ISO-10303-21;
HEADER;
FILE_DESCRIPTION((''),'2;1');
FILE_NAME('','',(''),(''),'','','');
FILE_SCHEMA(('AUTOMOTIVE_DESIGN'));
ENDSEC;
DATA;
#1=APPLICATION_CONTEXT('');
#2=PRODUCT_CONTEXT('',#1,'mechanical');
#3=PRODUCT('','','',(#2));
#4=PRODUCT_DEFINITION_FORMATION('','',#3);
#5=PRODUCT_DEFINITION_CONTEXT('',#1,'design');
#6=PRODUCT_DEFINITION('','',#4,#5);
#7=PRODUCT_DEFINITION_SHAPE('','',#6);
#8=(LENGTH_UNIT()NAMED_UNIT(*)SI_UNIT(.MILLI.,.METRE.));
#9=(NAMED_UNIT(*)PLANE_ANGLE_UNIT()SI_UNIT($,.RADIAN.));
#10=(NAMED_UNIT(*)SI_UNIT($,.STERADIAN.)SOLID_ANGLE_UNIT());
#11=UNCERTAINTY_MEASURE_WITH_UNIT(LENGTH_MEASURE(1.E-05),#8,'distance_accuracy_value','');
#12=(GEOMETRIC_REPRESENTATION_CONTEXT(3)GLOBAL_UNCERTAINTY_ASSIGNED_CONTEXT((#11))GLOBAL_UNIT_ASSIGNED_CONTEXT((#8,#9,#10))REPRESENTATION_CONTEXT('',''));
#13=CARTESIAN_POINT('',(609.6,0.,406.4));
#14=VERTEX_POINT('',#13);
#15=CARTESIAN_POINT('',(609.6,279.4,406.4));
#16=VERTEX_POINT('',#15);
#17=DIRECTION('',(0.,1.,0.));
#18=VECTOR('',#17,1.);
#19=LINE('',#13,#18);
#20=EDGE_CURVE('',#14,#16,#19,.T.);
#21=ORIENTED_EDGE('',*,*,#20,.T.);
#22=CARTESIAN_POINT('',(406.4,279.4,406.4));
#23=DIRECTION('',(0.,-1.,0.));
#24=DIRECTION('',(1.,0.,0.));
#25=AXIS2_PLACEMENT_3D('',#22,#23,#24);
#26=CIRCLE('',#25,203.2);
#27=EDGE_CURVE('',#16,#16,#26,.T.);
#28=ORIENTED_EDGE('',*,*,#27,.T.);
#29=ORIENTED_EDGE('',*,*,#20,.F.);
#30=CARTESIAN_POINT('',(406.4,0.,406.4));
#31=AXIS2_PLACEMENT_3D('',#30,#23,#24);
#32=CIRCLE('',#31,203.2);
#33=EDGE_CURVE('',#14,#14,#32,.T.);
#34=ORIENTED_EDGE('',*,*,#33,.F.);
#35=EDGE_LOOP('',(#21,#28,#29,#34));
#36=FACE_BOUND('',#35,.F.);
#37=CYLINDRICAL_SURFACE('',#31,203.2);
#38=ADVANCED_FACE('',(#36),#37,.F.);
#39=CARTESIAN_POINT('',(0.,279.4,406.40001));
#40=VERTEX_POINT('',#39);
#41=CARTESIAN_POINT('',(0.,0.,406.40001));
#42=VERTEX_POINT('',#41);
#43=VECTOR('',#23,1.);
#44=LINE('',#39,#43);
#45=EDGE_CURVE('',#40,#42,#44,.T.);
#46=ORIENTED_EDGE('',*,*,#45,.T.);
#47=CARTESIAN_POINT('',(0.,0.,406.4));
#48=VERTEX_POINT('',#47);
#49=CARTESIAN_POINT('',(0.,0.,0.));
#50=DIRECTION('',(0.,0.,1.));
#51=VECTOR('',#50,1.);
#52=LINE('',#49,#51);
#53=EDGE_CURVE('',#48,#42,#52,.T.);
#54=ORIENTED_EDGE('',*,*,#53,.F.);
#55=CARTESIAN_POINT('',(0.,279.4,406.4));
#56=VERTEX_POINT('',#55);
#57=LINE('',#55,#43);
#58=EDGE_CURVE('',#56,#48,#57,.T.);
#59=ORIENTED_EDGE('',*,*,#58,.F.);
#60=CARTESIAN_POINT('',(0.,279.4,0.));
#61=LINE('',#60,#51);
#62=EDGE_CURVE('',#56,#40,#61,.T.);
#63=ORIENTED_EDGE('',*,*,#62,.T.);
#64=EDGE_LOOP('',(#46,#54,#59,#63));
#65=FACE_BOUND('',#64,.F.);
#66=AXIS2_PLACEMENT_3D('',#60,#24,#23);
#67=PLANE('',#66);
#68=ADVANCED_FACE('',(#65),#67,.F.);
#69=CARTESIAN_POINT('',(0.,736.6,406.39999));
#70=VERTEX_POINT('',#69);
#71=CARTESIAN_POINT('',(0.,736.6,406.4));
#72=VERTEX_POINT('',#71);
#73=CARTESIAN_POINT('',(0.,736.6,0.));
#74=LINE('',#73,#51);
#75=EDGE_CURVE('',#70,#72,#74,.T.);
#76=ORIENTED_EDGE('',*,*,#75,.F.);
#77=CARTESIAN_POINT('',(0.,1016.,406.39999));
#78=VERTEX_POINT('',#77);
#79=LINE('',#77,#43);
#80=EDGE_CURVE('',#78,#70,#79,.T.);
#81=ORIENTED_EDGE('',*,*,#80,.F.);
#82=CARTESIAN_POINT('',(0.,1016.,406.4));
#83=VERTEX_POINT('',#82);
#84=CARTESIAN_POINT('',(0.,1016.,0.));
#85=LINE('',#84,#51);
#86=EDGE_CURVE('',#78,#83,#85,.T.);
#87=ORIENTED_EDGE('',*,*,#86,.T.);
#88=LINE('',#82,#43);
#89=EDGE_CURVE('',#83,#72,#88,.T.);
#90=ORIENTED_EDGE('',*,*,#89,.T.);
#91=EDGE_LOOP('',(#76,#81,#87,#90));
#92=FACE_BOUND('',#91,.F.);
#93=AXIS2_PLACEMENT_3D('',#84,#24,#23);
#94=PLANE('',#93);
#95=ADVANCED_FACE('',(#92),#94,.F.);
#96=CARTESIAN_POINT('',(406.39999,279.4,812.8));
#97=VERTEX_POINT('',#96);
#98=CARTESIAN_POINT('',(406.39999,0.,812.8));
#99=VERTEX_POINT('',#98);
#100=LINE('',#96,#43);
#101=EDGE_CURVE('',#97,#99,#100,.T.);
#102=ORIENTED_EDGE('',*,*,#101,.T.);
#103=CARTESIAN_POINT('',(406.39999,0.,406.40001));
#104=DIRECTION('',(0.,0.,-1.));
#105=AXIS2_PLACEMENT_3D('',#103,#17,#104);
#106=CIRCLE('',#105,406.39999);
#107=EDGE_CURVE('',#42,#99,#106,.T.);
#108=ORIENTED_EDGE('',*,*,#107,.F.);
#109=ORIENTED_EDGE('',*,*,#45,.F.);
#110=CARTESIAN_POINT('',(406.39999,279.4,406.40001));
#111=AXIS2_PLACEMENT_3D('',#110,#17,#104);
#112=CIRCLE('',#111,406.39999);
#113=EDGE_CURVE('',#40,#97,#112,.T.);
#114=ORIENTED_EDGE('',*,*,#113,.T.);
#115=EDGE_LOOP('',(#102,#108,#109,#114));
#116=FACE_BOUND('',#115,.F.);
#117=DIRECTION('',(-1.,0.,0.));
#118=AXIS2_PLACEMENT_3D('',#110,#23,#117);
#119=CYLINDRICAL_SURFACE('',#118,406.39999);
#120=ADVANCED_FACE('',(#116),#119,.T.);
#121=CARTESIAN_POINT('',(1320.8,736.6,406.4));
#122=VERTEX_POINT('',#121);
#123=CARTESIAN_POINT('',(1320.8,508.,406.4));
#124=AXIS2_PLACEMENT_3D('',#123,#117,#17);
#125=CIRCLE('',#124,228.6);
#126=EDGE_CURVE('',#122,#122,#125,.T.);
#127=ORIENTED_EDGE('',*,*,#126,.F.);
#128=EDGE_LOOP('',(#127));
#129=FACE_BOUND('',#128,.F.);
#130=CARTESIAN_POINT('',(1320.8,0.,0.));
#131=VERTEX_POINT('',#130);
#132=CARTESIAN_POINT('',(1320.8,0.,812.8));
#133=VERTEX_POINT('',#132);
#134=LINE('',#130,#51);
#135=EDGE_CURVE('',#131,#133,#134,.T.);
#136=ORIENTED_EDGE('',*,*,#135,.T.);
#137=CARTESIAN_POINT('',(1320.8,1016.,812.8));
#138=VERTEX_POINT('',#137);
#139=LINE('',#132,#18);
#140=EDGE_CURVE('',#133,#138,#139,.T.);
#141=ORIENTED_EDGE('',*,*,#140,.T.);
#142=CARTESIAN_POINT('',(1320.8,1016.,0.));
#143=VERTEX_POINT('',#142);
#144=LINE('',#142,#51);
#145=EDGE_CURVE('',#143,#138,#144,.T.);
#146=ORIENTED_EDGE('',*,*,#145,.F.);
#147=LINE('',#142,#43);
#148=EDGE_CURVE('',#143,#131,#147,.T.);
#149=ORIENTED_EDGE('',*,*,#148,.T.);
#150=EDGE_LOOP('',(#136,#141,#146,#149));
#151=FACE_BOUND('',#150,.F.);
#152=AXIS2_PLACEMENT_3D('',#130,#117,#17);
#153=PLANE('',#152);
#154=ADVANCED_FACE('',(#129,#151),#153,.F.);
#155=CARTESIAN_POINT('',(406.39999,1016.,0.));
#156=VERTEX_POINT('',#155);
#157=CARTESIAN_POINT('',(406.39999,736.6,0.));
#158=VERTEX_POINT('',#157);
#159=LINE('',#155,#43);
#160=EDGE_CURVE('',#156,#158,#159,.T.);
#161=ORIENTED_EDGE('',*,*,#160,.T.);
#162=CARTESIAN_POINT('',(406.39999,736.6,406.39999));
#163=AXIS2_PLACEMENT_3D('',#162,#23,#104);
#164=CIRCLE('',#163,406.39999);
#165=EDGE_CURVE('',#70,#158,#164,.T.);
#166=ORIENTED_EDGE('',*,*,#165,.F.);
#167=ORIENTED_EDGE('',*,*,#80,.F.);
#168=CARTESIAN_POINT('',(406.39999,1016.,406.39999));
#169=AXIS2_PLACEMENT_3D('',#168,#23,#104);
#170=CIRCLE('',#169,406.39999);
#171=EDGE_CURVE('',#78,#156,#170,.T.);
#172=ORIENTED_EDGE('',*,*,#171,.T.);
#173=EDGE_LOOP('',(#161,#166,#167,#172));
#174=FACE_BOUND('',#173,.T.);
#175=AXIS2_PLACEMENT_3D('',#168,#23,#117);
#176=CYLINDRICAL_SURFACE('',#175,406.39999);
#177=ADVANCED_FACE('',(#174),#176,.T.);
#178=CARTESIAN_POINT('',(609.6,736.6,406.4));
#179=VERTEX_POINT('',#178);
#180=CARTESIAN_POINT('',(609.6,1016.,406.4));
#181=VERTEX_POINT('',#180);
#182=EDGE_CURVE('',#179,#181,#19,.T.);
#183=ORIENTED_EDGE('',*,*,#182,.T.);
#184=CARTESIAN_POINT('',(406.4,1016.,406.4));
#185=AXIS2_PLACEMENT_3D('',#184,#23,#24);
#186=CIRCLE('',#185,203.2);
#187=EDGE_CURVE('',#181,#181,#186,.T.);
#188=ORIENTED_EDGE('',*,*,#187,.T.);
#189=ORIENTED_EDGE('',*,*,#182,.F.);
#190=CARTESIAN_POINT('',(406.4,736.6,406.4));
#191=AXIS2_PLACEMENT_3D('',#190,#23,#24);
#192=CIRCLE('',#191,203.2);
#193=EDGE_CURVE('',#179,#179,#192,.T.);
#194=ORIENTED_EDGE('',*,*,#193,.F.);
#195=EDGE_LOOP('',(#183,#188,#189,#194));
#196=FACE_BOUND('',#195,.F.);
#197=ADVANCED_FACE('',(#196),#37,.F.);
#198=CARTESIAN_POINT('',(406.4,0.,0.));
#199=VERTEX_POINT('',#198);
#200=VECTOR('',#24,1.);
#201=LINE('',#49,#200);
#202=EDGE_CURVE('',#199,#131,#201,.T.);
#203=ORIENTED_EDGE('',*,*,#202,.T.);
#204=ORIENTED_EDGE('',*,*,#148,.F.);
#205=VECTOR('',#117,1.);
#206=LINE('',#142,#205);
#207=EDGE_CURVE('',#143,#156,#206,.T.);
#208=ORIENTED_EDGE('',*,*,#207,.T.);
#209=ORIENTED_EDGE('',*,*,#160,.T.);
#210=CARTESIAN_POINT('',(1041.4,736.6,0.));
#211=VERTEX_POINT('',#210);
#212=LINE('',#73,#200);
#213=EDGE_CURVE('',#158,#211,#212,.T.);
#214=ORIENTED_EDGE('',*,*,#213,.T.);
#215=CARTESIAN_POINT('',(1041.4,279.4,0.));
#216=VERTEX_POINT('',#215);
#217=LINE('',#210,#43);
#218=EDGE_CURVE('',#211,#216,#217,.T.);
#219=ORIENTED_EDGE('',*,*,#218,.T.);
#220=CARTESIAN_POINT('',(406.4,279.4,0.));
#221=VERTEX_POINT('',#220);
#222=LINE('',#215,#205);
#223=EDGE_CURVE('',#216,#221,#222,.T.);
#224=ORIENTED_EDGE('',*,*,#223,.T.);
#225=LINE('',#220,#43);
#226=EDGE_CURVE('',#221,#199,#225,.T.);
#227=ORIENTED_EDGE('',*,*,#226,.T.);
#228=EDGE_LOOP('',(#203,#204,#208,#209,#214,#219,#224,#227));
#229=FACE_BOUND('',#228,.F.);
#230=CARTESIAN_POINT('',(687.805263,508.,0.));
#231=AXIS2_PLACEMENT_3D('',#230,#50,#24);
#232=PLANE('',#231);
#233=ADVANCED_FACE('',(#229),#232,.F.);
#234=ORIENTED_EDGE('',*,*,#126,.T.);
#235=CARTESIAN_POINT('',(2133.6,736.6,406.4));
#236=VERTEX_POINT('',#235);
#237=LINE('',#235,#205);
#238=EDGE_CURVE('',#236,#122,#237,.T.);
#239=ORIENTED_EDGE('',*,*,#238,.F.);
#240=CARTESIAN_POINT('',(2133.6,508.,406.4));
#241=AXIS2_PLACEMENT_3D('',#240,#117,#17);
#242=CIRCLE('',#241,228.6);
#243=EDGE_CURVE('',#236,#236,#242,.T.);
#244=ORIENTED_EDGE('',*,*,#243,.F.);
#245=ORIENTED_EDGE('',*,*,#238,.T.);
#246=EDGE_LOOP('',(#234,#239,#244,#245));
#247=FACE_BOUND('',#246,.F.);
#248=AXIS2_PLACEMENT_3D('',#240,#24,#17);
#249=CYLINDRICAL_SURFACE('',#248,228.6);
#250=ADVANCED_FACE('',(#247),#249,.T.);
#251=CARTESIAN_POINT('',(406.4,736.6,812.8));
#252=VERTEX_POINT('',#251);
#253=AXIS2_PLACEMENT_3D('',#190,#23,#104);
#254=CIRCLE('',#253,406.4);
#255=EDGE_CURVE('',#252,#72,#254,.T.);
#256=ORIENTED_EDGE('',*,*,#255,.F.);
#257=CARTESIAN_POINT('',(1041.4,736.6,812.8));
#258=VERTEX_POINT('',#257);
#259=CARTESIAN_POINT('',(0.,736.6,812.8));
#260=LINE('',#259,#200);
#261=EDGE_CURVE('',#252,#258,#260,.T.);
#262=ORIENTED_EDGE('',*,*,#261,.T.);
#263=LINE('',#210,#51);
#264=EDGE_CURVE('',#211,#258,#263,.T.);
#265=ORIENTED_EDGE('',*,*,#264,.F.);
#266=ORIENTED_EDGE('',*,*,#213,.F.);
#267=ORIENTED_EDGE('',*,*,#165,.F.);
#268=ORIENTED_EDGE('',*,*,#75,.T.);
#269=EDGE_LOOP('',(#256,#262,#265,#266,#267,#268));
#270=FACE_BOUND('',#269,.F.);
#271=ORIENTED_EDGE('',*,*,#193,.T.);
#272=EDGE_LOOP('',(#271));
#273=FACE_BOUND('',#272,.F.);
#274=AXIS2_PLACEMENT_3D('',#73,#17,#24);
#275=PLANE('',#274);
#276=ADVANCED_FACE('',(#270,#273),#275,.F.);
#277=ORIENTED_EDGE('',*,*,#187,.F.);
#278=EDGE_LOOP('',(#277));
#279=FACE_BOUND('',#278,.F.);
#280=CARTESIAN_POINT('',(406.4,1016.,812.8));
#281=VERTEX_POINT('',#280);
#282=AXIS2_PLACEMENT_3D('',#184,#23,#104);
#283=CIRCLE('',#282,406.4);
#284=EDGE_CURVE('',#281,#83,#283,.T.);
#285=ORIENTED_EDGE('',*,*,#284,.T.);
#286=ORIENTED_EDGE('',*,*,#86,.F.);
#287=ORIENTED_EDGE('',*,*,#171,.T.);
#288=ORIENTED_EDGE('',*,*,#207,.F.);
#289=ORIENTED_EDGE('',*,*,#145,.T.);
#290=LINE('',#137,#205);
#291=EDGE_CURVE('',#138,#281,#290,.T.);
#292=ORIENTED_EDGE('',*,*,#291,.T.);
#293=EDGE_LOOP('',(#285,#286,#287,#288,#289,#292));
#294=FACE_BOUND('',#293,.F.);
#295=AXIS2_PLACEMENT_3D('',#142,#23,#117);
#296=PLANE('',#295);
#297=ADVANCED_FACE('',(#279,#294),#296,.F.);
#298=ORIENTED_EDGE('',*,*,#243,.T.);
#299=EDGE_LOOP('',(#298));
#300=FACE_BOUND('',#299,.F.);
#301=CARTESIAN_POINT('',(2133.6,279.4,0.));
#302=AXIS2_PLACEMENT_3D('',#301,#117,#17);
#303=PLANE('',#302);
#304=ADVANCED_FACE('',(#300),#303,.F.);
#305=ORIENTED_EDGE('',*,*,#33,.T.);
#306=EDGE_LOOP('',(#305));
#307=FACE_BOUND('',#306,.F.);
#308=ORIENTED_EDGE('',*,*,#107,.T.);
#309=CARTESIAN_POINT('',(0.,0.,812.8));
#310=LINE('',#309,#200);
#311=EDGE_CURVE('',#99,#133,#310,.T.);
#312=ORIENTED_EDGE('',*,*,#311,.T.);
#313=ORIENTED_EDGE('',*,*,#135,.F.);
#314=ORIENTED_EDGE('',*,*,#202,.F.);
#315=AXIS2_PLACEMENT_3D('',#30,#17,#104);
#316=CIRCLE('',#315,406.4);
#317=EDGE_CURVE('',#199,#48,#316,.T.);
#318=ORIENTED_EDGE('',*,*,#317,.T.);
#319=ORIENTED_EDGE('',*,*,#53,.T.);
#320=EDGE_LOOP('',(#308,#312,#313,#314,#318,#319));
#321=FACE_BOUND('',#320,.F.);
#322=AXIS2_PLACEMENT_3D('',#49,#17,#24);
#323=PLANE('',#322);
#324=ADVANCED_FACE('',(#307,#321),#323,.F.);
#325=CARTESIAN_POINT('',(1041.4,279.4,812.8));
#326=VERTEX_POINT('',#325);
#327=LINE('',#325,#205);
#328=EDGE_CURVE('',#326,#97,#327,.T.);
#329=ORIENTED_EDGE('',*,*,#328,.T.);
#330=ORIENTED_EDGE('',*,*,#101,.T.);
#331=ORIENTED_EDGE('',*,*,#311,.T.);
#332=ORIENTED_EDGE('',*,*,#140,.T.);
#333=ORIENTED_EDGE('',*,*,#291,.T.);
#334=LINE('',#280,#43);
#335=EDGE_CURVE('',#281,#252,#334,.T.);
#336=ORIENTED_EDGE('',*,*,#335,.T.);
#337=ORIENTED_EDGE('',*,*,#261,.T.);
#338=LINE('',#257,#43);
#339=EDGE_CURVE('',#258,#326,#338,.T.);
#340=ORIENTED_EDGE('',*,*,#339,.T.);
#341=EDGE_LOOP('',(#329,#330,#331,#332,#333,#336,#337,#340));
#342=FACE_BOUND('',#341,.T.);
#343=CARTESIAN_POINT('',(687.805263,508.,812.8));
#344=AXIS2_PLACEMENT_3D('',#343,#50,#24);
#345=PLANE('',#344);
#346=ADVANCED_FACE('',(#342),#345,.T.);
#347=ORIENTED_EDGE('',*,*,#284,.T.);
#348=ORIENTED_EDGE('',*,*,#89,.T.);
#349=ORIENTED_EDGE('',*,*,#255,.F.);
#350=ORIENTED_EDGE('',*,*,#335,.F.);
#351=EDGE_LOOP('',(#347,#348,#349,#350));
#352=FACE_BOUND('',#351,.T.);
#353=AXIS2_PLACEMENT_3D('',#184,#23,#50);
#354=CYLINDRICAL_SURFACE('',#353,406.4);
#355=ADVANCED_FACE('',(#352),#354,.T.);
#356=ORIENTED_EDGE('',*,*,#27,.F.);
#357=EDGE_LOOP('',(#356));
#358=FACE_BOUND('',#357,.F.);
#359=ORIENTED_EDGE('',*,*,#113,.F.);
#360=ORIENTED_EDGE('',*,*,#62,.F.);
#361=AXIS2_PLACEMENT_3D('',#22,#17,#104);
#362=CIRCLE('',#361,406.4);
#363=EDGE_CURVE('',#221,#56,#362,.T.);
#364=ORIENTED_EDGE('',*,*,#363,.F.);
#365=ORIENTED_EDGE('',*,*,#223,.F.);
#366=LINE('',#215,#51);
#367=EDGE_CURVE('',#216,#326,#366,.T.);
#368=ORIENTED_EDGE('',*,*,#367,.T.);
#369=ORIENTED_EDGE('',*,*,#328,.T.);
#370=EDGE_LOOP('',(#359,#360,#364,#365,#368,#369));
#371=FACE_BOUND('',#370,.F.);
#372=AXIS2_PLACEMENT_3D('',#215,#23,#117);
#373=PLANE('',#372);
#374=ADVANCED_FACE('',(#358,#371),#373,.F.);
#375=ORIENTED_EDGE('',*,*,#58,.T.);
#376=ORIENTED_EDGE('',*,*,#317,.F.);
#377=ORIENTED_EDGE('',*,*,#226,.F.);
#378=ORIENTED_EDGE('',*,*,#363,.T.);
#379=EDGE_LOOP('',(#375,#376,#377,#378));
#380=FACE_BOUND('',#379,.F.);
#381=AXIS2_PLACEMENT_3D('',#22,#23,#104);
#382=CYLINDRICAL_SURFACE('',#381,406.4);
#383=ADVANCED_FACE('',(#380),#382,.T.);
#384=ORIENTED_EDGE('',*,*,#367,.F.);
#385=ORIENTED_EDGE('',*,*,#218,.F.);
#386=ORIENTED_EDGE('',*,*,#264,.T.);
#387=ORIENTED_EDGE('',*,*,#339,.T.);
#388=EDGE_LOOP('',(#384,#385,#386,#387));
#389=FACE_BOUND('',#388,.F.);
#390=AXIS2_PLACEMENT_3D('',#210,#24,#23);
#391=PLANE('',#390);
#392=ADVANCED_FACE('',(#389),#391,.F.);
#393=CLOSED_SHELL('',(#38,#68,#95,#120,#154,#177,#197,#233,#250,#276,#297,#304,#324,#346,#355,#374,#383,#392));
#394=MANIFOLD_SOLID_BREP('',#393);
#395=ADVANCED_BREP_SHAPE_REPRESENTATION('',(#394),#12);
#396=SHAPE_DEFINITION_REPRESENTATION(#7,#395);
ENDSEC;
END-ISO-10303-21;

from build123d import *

# Parameters (mm, degrees)
F0_W     = 812.8
F0_H     = 457.2
F1_DEPTH = 812.8
F3_DEPTH = 812.8
F4_R     = 203.2
F5_DEPTH = 1016.001
F6_R     = 406.4
F7_R     = 406.39999
F8_R     = 406.4
F9_R     = 406.39999


# Not quite as in the source:
# - a fillet or chamfer is up to 0.001 mm smaller than in the source, because OpenCascade refuses the exact size


with BuildPart() as f1:
    # F0 (on Top) → F1 (new body)
    with BuildSketch(Plane.XY):
        Polygon((0, 279.4), (0, 0), (1320.8, 0), (1320.8, 279.4), (1320.8, 736.6), (1320.8, 1016), (0, 1016), (0, 736.6), (1041.4, 736.6), (1041.4, 279.4), align=None)
        with Locations((1727.2, 508)):
            Rectangle(F0_W, F0_H)
    extrude(amount=F1_DEPTH)

    # F2 (on face) → F3 (cut)
    with BuildSketch(Plane.YZ.offset(2133.6)):
        with BuildLine():
            ThreePointArc((279.4, 406.4), (508, 635), (736.6, 406.4))
            Line((736.6, 406.4), (736.6, 812.8))
            Line((736.6, 812.8), (279.4, 812.8))
            Line((279.4, 812.8), (279.4, 406.4))
        make_face()
        with BuildLine():
            Line((736.6, 0), (736.6, 406.4))
            ThreePointArc((736.6, 406.4), (508, 177.8), (279.4, 406.4))
            Line((279.4, 406.4), (279.4, 0))
            Line((279.4, 0), (736.6, 0))
        make_face()
    extrude(amount=-F3_DEPTH, mode=Mode.SUBTRACT)

    # F4 (on face) → F5 (cut, through all)
    with BuildSketch(Plane.XZ):
        with Locations((406.4, 406.4)):
            Circle(F4_R)
    extrude(amount=-F5_DEPTH, mode=Mode.SUBTRACT)

    # F6
    f6_edges = [f1.edges().sort_by_distance(p)[0] for p in [
        (0, 876.3, 812.8),
    ]]
    fillet(f6_edges, radius=F6_R)

    # F7 (radius 406.4 in the source; OpenCascade refuses exactly that, so slightly less here)
    f7_edges = [f1.edges().sort_by_distance(p)[0] for p in [
        (0, 876.3, 0),
    ]]
    fillet(f7_edges, radius=F7_R)

    # F8
    f8_edges = [f1.edges().sort_by_distance(p)[0] for p in [
        (0, 139.7, 0),
    ]]
    fillet(f8_edges, radius=F8_R)

    # F9 (radius 406.4 in the source; OpenCascade refuses exactly that, so slightly less here)
    f9_edges = [f1.edges().sort_by_distance(p)[0] for p in [
        (0, 139.7, 812.8),
    ]]
    fillet(f9_edges, radius=F9_R)


solid = f1.part
